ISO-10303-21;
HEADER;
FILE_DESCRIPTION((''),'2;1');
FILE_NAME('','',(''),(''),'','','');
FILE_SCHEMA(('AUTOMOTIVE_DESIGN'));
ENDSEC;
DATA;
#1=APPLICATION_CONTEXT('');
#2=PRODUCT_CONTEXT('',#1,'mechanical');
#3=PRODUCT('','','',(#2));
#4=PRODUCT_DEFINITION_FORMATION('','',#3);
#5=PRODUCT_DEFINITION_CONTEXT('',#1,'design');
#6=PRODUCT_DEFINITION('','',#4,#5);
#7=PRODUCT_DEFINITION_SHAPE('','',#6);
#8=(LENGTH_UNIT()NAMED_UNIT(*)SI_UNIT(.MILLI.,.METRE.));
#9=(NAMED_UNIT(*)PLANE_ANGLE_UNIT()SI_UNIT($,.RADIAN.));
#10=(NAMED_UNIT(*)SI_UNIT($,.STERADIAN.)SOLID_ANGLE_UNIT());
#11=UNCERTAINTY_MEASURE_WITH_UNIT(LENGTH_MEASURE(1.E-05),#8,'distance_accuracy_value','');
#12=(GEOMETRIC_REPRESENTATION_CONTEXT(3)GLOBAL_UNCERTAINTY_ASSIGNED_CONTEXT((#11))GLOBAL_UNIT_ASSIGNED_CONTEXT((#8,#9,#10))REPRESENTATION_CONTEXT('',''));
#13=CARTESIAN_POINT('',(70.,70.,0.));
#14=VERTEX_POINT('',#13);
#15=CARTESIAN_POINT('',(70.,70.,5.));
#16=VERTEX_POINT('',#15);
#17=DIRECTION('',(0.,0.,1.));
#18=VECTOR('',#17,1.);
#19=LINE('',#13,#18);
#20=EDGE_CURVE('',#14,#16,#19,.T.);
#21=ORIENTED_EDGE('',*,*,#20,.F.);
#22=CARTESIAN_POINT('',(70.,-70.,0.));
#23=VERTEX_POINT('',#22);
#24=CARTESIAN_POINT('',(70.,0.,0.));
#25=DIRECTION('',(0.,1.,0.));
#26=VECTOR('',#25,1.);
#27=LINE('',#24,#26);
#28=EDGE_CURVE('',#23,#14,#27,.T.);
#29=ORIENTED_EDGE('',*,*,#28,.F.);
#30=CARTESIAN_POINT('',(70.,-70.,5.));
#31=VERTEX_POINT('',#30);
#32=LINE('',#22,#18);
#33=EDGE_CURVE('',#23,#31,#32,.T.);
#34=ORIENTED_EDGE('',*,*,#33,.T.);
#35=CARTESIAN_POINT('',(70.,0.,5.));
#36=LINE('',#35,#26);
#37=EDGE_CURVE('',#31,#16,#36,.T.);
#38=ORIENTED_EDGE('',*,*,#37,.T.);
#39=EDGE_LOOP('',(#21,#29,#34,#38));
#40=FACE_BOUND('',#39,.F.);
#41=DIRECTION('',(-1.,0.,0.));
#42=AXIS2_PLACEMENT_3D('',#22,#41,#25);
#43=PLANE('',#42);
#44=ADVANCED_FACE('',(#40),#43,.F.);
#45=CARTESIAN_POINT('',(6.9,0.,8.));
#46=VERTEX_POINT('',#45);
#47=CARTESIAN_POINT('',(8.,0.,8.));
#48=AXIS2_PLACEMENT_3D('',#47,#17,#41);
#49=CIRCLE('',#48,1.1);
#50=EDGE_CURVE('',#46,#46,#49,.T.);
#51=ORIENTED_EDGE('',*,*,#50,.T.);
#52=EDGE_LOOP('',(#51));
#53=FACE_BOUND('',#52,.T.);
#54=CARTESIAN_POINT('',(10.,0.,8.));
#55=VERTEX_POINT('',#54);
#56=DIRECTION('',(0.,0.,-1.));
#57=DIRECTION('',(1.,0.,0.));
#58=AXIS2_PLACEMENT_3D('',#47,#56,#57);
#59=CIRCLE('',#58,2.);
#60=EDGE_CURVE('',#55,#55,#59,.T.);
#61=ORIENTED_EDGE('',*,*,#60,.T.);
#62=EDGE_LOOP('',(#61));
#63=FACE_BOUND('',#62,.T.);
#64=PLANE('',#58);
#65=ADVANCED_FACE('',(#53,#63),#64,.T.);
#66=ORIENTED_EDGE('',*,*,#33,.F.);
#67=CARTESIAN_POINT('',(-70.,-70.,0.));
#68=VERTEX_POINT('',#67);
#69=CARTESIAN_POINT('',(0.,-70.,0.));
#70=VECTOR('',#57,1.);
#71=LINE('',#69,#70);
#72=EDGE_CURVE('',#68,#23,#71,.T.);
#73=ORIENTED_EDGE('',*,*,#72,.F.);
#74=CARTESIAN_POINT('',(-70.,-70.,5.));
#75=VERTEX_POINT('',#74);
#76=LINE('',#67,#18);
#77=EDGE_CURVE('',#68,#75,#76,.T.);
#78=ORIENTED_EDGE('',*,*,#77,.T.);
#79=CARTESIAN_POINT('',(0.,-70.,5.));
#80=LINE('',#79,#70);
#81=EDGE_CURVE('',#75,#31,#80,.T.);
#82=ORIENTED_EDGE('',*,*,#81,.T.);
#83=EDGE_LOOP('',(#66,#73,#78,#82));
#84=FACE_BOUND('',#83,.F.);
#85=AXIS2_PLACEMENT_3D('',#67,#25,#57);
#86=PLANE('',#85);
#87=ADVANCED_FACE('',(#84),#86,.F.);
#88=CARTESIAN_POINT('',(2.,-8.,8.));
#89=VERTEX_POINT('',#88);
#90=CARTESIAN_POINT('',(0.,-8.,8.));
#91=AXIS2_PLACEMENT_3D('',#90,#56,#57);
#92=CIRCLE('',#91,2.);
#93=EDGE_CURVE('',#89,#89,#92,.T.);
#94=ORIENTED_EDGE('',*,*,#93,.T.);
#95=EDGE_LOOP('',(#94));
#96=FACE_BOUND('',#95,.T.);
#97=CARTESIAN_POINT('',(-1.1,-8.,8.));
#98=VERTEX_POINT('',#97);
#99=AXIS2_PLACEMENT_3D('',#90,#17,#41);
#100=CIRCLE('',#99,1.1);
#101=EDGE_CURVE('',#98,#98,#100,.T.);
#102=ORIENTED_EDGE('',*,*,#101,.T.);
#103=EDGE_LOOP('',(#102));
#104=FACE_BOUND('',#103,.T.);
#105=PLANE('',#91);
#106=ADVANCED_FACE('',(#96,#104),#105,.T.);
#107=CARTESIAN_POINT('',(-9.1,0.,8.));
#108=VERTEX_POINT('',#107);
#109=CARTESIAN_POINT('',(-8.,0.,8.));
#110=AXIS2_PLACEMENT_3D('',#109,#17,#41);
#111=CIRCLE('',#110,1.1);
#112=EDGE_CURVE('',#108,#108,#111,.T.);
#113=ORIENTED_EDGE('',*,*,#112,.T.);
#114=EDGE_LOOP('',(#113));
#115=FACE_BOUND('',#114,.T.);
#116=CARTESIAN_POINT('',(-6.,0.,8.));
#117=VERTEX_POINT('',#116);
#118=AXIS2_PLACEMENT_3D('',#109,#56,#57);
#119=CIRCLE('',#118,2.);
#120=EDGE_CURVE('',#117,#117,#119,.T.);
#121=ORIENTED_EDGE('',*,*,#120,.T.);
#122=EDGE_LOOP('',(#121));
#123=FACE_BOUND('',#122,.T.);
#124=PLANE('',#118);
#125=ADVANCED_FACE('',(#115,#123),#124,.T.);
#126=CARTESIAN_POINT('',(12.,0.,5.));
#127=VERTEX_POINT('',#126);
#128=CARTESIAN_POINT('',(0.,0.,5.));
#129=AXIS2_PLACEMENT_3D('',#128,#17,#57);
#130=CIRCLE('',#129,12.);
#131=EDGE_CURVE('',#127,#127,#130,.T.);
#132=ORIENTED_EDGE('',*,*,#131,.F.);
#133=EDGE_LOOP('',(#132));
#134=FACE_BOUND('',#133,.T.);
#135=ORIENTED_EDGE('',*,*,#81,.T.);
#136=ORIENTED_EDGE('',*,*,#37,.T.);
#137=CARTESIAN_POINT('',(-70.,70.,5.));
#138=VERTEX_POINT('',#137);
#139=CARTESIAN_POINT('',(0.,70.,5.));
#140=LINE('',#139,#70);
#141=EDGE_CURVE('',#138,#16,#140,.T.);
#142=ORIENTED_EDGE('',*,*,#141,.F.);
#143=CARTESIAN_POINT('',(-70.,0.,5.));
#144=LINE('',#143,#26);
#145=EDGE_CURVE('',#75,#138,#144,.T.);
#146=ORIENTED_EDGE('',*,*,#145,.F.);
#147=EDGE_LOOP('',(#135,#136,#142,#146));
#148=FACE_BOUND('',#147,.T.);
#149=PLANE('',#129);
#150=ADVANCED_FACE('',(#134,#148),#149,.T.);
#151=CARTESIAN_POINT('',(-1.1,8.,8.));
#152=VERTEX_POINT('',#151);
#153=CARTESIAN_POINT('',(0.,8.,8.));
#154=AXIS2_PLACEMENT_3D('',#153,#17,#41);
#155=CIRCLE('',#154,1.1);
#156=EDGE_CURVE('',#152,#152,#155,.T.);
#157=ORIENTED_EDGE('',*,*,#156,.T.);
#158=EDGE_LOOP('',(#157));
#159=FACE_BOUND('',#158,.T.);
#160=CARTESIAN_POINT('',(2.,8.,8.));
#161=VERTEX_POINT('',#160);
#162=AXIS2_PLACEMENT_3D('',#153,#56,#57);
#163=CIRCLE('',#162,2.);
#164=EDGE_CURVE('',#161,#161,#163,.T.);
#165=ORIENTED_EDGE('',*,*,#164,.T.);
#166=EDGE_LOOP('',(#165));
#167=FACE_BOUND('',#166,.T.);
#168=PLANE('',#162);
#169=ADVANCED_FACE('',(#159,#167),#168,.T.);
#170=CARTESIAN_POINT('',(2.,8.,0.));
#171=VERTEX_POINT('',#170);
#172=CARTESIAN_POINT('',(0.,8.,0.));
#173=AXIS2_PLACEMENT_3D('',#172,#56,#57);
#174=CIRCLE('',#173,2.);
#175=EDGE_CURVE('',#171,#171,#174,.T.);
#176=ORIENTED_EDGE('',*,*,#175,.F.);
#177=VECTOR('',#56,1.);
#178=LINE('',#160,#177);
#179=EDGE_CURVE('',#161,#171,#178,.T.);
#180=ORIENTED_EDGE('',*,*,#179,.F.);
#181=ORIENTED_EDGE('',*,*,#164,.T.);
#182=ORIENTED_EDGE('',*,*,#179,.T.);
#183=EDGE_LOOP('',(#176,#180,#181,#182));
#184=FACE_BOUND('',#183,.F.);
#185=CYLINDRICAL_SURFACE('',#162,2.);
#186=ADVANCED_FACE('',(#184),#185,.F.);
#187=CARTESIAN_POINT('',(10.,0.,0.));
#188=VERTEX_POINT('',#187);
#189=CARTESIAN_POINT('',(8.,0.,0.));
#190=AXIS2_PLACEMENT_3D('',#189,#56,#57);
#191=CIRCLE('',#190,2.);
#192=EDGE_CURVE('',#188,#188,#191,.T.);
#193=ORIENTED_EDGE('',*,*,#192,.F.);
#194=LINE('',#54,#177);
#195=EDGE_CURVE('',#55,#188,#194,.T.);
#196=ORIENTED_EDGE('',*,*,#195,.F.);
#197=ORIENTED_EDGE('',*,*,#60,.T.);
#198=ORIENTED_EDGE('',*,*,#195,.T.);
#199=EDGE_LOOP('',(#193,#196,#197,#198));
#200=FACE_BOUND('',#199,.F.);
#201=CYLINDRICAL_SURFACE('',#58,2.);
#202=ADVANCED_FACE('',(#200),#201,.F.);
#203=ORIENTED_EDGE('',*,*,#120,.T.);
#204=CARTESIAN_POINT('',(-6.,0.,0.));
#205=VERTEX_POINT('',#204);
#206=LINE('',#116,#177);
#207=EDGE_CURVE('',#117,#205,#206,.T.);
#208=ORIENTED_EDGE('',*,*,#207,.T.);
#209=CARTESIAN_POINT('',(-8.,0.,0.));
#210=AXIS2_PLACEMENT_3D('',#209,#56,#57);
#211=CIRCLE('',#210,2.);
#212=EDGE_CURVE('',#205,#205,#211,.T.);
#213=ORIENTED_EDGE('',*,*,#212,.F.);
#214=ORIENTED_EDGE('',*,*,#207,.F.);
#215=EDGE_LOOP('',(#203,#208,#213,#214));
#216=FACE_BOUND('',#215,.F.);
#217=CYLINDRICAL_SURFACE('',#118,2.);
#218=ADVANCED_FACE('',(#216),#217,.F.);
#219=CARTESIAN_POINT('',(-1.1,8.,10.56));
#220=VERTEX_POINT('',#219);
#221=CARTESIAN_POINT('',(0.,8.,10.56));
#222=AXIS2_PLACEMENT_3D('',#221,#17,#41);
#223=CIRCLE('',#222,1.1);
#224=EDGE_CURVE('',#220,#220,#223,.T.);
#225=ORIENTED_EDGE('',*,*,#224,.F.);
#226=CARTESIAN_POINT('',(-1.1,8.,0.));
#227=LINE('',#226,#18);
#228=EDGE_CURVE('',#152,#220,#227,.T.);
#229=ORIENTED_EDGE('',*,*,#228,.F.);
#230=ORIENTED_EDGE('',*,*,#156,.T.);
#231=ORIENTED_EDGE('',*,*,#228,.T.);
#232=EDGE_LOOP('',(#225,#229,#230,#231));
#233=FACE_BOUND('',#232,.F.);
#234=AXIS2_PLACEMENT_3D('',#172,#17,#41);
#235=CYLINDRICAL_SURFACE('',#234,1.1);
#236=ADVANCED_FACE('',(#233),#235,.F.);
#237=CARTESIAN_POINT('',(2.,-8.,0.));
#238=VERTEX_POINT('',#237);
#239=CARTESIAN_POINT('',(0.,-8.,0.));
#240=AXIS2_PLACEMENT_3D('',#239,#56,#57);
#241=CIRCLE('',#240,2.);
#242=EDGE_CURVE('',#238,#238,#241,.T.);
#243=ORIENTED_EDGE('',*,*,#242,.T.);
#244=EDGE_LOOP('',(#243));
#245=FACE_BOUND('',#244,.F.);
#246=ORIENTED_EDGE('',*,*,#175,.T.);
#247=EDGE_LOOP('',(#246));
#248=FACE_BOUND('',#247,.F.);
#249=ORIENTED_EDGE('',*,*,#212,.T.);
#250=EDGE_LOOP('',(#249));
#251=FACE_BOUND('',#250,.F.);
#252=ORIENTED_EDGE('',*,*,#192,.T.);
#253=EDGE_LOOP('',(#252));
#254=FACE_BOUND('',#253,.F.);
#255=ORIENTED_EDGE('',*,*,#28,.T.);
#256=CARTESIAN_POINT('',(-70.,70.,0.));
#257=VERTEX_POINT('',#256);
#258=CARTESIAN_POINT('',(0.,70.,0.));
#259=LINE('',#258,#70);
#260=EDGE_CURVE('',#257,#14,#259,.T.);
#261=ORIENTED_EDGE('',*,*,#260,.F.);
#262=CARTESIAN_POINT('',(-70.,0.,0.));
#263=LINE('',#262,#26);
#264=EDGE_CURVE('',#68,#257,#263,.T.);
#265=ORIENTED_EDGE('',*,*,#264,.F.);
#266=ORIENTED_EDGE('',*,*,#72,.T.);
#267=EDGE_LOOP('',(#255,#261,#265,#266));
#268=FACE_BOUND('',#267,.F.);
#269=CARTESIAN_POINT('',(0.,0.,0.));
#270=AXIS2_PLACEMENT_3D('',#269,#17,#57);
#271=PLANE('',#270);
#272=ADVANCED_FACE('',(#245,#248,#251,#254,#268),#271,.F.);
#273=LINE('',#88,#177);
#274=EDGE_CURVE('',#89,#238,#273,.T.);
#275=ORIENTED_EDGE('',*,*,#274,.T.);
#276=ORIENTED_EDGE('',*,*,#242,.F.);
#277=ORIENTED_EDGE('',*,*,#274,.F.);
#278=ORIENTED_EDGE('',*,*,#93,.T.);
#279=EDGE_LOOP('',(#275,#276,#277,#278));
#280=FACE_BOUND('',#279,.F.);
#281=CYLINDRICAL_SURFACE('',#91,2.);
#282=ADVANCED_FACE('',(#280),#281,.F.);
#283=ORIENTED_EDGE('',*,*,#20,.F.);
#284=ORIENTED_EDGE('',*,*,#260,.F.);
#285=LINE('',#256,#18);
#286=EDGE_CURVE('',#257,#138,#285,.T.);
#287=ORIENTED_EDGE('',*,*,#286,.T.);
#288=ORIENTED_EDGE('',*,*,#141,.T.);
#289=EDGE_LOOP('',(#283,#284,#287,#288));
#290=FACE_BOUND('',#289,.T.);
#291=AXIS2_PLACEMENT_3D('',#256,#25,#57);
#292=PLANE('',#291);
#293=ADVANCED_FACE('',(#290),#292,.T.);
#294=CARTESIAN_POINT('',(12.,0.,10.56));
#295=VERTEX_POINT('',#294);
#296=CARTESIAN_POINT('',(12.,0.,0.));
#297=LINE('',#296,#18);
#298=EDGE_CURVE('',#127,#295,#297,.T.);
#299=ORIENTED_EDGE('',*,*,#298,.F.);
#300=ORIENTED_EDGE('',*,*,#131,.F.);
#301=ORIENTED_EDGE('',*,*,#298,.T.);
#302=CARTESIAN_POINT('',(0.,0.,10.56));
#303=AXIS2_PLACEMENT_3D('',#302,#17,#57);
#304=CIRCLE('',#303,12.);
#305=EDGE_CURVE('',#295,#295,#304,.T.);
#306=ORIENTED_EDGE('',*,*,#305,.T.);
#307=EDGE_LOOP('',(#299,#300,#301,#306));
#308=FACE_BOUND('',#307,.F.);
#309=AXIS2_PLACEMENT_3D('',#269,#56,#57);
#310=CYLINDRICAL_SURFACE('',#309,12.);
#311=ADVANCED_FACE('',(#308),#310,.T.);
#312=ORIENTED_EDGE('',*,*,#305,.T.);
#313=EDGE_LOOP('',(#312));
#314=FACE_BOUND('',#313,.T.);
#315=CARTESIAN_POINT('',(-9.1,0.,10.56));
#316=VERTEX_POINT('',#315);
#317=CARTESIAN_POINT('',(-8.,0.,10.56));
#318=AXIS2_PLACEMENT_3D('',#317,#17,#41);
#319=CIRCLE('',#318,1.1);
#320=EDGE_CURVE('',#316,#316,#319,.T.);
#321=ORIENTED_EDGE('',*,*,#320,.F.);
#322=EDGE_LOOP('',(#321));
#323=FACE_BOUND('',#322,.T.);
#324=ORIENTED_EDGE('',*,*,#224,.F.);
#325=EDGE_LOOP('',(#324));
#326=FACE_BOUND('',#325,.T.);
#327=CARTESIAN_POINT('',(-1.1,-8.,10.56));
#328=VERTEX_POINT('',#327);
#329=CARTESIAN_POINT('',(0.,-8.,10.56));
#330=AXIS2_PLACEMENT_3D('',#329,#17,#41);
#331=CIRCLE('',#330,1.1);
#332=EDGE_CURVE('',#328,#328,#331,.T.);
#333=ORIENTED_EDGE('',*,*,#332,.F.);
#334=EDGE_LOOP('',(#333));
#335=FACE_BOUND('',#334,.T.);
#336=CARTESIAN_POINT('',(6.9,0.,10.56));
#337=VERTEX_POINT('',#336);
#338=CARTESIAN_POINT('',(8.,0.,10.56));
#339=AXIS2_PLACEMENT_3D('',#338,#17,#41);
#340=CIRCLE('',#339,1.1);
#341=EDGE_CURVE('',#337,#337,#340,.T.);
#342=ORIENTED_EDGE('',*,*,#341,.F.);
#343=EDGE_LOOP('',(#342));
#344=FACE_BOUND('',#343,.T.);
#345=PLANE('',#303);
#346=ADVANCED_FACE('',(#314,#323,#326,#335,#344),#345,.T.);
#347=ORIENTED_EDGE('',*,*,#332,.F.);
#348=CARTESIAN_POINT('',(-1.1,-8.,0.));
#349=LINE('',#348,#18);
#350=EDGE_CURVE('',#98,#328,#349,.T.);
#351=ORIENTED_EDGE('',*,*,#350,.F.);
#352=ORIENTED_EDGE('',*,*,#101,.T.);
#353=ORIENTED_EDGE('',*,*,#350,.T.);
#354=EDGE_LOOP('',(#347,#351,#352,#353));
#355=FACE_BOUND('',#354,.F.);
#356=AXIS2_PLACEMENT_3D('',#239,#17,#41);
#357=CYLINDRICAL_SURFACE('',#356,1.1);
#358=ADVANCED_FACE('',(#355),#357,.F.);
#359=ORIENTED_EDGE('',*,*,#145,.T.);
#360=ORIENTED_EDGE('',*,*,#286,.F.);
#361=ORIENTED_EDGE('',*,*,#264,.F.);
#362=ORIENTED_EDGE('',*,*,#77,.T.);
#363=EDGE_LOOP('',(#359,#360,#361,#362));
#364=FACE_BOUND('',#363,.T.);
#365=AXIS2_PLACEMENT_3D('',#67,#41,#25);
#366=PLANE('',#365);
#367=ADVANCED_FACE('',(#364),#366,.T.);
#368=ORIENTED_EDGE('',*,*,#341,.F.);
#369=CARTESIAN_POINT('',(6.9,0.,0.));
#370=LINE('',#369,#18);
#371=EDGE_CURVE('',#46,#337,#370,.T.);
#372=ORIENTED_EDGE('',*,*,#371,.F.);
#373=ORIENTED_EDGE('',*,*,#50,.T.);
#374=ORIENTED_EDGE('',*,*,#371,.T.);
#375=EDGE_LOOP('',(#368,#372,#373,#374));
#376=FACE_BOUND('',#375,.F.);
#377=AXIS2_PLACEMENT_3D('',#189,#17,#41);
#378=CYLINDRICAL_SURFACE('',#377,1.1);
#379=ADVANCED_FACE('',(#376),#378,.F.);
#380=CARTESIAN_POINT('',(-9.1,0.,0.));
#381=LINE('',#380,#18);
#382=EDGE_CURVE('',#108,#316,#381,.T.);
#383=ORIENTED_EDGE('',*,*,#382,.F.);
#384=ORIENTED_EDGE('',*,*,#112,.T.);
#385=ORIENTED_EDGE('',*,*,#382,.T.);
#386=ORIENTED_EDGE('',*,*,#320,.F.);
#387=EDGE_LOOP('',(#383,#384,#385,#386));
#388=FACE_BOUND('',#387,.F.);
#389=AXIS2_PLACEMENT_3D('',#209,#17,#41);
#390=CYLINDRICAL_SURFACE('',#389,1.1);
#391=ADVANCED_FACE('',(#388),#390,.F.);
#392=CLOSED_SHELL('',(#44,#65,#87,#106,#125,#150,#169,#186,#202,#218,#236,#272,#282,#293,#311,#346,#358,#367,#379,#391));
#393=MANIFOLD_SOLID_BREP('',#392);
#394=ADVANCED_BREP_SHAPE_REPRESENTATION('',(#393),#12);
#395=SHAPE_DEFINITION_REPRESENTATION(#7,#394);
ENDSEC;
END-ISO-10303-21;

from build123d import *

# Parameters (mm, degrees)
F0_W           = 140
F0_H           = 140
F0_R           = 12
F1_DEPTH       = 5
F2_DEPTH       = 10.56
F3_D           = 2.2
F3_DEPTH       = 12
F3_CBORE_D     = 4
F3_CBORE_DEPTH = 8
F3_TIP         = 0.6609466809


# Not quite as in the source:
# - a feature names something its author has since deleted; it is built from what else it names


with BuildPart() as f1:
    # F0 (on Top) → F1 (new body)
    with BuildSketch(Plane.XY):
        Rectangle(F0_W, F0_H)
        Circle(F0_R, mode=Mode.SUBTRACT)
    extrude(amount=F1_DEPTH)

    # F0 (on Top) → F2 (join)
    with BuildSketch(Plane.XY):
        Circle(F0_R)
    extrude(amount=F2_DEPTH)

    # F3
    with Locations(Plane(origin=(0, 0, 0), x_dir=(1, 0, 0), z_dir=(0, 0, -1))):
        with Locations((8, 0), (0, -8), (-8, 0), (0, 8)):
            CounterBoreHole(F3_D / 2, F3_CBORE_D / 2, F3_CBORE_DEPTH, depth=F3_DEPTH)
            with Locations((0, 0, -(F3_DEPTH + F3_TIP / 2))):  # 118° drill point
                Cone(0, F3_D / 2, F3_TIP, mode=Mode.SUBTRACT)


solid = f1.part
